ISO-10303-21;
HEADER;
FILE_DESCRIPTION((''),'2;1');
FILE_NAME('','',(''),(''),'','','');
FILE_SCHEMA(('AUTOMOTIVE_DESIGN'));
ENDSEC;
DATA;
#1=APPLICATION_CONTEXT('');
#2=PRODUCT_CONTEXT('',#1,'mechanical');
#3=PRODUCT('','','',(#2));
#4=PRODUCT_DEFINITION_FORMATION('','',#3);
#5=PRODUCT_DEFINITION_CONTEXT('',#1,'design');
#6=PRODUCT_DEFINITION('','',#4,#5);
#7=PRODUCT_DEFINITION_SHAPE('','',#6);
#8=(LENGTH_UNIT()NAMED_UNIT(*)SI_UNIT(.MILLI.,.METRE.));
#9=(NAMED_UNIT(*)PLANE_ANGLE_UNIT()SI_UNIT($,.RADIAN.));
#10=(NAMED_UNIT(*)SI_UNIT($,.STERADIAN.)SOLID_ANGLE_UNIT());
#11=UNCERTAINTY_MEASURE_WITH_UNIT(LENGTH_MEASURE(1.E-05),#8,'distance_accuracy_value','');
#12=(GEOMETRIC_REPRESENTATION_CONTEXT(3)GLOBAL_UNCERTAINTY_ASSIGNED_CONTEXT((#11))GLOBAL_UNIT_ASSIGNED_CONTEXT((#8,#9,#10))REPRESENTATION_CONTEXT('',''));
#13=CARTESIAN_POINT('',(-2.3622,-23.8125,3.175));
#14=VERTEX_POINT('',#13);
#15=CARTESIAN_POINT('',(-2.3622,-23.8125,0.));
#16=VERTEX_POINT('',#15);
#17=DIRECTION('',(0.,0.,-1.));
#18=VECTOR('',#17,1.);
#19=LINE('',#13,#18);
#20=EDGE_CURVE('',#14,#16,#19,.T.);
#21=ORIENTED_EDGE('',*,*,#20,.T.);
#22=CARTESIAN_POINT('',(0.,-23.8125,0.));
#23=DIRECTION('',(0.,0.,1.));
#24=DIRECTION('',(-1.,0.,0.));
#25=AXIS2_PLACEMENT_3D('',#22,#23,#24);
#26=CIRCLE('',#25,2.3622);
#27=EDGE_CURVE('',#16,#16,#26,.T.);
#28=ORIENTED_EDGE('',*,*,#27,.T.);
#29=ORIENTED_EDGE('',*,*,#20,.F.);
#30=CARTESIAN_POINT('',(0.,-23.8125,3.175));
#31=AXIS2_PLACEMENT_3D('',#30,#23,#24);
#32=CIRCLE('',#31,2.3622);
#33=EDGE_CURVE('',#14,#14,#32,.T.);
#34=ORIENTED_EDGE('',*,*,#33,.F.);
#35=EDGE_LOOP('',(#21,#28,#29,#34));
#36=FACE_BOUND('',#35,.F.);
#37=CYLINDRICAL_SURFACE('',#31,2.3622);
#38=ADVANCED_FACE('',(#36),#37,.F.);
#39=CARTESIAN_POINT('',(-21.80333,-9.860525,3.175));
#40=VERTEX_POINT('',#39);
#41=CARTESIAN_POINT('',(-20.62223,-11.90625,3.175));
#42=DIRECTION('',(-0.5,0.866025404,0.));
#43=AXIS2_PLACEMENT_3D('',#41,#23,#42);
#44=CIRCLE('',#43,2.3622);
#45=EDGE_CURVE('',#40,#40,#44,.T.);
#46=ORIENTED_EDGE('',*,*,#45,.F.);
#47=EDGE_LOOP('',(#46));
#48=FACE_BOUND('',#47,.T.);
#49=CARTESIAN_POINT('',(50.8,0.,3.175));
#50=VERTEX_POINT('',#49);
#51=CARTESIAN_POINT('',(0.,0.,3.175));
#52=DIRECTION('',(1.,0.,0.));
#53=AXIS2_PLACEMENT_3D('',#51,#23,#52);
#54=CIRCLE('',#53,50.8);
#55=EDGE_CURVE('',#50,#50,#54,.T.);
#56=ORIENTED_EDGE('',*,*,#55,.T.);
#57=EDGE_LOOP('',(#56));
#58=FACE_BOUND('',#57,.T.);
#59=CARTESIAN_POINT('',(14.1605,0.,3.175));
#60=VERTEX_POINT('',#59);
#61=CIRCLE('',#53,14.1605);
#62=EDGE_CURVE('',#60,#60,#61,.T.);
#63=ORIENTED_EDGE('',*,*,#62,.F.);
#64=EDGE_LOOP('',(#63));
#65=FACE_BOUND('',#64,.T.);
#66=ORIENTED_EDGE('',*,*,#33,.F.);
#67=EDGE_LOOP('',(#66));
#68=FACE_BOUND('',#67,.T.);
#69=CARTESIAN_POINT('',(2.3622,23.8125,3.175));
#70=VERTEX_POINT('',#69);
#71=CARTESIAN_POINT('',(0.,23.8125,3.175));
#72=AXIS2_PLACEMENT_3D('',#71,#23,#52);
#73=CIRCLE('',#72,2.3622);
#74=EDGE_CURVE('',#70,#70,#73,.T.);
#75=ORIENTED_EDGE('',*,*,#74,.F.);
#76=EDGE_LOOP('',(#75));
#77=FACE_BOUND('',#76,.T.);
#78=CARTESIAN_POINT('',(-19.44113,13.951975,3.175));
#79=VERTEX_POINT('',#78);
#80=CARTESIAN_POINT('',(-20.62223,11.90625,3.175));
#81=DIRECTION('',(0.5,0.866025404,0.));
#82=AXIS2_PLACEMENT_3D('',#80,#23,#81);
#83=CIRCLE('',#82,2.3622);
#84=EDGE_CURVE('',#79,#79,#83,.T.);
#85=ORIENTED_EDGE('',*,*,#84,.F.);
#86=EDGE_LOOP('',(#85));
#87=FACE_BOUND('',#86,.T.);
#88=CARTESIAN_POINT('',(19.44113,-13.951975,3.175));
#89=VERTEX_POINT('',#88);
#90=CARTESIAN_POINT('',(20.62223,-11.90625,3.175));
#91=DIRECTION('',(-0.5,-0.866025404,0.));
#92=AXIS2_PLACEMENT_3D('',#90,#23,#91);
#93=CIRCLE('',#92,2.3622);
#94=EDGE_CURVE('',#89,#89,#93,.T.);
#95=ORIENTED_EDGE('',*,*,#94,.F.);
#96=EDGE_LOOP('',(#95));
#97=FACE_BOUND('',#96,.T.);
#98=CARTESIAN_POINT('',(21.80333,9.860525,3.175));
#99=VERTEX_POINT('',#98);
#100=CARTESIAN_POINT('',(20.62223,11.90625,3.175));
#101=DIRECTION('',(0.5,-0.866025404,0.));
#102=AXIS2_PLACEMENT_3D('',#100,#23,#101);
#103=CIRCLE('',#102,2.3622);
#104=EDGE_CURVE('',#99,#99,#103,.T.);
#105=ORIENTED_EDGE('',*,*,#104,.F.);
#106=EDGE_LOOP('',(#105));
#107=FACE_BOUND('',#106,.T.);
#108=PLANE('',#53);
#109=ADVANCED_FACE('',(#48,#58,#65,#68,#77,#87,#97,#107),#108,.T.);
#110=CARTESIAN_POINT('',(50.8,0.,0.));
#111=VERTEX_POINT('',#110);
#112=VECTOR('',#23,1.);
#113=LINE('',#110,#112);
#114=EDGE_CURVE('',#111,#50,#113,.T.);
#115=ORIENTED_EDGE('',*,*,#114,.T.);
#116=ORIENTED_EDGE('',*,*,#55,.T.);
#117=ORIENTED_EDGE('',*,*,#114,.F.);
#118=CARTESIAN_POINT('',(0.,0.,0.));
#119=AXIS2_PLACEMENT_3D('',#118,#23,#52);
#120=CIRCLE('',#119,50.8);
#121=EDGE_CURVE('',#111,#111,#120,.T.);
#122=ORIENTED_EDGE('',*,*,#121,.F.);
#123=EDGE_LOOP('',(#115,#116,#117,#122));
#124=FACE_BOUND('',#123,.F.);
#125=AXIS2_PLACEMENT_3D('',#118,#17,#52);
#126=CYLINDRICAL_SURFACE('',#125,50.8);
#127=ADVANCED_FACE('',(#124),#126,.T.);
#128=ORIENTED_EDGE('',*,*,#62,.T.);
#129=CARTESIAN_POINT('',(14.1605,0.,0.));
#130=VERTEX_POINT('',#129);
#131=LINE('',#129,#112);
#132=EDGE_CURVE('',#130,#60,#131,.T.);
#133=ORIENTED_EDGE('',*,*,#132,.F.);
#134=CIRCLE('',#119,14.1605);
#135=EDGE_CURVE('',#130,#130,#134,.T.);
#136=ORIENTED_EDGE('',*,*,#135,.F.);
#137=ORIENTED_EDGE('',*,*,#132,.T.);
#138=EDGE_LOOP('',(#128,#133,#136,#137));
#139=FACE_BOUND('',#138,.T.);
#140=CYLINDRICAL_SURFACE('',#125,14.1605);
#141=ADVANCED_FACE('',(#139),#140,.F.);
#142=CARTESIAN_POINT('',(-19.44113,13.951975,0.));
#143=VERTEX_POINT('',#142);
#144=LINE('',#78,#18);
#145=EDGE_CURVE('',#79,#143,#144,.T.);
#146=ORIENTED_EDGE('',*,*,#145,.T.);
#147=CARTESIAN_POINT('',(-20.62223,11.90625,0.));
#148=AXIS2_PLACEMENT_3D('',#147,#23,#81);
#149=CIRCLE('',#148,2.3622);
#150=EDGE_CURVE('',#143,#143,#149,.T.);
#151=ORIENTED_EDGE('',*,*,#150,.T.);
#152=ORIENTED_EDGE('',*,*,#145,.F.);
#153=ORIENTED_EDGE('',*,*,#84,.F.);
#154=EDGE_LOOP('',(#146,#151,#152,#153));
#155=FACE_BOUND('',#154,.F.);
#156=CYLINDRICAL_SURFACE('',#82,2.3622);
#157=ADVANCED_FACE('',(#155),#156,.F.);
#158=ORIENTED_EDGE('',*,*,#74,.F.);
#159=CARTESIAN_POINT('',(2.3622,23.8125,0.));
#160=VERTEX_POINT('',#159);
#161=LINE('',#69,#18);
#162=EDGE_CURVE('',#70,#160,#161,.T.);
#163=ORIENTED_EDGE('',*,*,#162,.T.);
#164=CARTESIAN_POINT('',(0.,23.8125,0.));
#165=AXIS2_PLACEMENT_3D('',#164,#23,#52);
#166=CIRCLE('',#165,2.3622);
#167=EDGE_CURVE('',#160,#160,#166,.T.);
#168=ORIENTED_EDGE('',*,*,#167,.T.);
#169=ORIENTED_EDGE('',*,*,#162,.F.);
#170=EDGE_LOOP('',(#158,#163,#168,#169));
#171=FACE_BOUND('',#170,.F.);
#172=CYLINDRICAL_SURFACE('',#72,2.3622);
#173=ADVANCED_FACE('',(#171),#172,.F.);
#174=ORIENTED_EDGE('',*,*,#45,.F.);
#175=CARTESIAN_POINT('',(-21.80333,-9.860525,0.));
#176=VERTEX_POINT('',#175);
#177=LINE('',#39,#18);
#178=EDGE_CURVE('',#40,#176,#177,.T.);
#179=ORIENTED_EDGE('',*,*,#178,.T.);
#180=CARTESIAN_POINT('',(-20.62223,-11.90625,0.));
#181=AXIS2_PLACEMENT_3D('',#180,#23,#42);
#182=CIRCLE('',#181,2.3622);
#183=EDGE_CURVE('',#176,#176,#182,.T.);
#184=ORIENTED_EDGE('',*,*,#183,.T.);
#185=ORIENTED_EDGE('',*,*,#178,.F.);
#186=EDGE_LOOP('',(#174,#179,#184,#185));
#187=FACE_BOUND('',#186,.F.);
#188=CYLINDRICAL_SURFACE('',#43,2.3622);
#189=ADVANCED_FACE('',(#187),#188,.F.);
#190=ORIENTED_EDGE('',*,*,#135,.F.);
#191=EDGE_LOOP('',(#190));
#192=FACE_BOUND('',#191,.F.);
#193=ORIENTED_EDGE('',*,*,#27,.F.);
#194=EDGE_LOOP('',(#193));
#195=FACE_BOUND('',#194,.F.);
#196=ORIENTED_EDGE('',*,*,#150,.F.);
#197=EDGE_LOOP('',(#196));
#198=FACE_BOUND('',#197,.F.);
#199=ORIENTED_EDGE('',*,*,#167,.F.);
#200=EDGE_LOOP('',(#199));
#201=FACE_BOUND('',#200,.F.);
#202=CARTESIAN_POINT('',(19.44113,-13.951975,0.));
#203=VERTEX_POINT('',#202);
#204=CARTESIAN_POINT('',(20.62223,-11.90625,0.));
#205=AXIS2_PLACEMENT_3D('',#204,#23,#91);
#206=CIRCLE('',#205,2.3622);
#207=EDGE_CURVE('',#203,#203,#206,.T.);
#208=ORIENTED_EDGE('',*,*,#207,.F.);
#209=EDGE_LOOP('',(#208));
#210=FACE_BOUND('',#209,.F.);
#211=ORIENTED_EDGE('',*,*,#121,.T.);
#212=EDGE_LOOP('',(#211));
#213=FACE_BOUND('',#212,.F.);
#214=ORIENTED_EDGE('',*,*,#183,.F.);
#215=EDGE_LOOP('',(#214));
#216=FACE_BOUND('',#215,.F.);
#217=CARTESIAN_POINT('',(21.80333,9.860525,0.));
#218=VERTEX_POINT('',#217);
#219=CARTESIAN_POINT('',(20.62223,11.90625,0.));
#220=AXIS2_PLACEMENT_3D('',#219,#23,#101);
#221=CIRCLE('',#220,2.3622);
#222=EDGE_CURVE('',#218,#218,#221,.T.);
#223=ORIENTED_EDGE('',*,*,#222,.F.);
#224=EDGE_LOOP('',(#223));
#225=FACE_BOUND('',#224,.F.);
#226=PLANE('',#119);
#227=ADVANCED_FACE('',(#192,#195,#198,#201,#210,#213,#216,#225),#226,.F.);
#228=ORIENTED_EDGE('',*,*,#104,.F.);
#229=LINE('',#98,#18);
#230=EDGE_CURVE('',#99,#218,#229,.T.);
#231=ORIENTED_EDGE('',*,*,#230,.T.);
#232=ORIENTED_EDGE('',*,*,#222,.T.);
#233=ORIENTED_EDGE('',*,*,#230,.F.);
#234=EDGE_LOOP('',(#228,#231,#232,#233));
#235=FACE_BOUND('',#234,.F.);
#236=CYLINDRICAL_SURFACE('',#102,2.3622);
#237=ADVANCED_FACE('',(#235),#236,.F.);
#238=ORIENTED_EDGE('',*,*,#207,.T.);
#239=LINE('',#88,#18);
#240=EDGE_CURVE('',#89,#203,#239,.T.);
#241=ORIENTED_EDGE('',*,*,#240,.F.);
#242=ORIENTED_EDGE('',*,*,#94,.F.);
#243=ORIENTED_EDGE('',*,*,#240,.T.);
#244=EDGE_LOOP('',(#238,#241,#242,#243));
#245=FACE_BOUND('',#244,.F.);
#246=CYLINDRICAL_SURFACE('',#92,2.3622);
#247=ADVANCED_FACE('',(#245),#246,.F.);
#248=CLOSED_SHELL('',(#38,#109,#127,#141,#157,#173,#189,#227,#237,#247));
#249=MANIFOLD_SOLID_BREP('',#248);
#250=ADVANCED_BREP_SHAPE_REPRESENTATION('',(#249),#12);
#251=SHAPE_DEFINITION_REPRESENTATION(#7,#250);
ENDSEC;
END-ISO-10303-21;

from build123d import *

# Parameters (mm, degrees)
F0_R            = 50.8
F0_R_2          = 14.1605
F1_DEPTH        = 3.175
F2_R            = 2.3622
F3_DEPTH        = 3.176
F3_COPIES_COUNT = 6


# Not quite as in the source:
# - a pattern or mirror of a feature is missing from the dataset's text; its kind, count and spacing are read off the source's solid


with BuildPart() as f1:
    # F0 (on Top) → F1 (new body)
    with BuildSketch(Plane.XY):
        Circle(F0_R)
        Circle(F0_R_2, mode=Mode.SUBTRACT)
    extrude(amount=F1_DEPTH)

    # F2 (on face) → F3 (cut, through all)
    with BuildSketch(Plane.XY.offset(3.175)):
        with Locations((0, 23.8125)):
            Circle(F2_R)
    f3 = extrude(amount=-F3_DEPTH, mode=Mode.SUBTRACT)

    # F3_copies: F3 ×6 about axis
    f3_copies_axis = Axis((0, 0, 0), (0, 0, 1))
    for i in range(1, F3_COPIES_COUNT):
        add(f3.rotate(f3_copies_axis, i * 360 / F3_COPIES_COUNT), mode=Mode.SUBTRACT)


solid = f1.part
